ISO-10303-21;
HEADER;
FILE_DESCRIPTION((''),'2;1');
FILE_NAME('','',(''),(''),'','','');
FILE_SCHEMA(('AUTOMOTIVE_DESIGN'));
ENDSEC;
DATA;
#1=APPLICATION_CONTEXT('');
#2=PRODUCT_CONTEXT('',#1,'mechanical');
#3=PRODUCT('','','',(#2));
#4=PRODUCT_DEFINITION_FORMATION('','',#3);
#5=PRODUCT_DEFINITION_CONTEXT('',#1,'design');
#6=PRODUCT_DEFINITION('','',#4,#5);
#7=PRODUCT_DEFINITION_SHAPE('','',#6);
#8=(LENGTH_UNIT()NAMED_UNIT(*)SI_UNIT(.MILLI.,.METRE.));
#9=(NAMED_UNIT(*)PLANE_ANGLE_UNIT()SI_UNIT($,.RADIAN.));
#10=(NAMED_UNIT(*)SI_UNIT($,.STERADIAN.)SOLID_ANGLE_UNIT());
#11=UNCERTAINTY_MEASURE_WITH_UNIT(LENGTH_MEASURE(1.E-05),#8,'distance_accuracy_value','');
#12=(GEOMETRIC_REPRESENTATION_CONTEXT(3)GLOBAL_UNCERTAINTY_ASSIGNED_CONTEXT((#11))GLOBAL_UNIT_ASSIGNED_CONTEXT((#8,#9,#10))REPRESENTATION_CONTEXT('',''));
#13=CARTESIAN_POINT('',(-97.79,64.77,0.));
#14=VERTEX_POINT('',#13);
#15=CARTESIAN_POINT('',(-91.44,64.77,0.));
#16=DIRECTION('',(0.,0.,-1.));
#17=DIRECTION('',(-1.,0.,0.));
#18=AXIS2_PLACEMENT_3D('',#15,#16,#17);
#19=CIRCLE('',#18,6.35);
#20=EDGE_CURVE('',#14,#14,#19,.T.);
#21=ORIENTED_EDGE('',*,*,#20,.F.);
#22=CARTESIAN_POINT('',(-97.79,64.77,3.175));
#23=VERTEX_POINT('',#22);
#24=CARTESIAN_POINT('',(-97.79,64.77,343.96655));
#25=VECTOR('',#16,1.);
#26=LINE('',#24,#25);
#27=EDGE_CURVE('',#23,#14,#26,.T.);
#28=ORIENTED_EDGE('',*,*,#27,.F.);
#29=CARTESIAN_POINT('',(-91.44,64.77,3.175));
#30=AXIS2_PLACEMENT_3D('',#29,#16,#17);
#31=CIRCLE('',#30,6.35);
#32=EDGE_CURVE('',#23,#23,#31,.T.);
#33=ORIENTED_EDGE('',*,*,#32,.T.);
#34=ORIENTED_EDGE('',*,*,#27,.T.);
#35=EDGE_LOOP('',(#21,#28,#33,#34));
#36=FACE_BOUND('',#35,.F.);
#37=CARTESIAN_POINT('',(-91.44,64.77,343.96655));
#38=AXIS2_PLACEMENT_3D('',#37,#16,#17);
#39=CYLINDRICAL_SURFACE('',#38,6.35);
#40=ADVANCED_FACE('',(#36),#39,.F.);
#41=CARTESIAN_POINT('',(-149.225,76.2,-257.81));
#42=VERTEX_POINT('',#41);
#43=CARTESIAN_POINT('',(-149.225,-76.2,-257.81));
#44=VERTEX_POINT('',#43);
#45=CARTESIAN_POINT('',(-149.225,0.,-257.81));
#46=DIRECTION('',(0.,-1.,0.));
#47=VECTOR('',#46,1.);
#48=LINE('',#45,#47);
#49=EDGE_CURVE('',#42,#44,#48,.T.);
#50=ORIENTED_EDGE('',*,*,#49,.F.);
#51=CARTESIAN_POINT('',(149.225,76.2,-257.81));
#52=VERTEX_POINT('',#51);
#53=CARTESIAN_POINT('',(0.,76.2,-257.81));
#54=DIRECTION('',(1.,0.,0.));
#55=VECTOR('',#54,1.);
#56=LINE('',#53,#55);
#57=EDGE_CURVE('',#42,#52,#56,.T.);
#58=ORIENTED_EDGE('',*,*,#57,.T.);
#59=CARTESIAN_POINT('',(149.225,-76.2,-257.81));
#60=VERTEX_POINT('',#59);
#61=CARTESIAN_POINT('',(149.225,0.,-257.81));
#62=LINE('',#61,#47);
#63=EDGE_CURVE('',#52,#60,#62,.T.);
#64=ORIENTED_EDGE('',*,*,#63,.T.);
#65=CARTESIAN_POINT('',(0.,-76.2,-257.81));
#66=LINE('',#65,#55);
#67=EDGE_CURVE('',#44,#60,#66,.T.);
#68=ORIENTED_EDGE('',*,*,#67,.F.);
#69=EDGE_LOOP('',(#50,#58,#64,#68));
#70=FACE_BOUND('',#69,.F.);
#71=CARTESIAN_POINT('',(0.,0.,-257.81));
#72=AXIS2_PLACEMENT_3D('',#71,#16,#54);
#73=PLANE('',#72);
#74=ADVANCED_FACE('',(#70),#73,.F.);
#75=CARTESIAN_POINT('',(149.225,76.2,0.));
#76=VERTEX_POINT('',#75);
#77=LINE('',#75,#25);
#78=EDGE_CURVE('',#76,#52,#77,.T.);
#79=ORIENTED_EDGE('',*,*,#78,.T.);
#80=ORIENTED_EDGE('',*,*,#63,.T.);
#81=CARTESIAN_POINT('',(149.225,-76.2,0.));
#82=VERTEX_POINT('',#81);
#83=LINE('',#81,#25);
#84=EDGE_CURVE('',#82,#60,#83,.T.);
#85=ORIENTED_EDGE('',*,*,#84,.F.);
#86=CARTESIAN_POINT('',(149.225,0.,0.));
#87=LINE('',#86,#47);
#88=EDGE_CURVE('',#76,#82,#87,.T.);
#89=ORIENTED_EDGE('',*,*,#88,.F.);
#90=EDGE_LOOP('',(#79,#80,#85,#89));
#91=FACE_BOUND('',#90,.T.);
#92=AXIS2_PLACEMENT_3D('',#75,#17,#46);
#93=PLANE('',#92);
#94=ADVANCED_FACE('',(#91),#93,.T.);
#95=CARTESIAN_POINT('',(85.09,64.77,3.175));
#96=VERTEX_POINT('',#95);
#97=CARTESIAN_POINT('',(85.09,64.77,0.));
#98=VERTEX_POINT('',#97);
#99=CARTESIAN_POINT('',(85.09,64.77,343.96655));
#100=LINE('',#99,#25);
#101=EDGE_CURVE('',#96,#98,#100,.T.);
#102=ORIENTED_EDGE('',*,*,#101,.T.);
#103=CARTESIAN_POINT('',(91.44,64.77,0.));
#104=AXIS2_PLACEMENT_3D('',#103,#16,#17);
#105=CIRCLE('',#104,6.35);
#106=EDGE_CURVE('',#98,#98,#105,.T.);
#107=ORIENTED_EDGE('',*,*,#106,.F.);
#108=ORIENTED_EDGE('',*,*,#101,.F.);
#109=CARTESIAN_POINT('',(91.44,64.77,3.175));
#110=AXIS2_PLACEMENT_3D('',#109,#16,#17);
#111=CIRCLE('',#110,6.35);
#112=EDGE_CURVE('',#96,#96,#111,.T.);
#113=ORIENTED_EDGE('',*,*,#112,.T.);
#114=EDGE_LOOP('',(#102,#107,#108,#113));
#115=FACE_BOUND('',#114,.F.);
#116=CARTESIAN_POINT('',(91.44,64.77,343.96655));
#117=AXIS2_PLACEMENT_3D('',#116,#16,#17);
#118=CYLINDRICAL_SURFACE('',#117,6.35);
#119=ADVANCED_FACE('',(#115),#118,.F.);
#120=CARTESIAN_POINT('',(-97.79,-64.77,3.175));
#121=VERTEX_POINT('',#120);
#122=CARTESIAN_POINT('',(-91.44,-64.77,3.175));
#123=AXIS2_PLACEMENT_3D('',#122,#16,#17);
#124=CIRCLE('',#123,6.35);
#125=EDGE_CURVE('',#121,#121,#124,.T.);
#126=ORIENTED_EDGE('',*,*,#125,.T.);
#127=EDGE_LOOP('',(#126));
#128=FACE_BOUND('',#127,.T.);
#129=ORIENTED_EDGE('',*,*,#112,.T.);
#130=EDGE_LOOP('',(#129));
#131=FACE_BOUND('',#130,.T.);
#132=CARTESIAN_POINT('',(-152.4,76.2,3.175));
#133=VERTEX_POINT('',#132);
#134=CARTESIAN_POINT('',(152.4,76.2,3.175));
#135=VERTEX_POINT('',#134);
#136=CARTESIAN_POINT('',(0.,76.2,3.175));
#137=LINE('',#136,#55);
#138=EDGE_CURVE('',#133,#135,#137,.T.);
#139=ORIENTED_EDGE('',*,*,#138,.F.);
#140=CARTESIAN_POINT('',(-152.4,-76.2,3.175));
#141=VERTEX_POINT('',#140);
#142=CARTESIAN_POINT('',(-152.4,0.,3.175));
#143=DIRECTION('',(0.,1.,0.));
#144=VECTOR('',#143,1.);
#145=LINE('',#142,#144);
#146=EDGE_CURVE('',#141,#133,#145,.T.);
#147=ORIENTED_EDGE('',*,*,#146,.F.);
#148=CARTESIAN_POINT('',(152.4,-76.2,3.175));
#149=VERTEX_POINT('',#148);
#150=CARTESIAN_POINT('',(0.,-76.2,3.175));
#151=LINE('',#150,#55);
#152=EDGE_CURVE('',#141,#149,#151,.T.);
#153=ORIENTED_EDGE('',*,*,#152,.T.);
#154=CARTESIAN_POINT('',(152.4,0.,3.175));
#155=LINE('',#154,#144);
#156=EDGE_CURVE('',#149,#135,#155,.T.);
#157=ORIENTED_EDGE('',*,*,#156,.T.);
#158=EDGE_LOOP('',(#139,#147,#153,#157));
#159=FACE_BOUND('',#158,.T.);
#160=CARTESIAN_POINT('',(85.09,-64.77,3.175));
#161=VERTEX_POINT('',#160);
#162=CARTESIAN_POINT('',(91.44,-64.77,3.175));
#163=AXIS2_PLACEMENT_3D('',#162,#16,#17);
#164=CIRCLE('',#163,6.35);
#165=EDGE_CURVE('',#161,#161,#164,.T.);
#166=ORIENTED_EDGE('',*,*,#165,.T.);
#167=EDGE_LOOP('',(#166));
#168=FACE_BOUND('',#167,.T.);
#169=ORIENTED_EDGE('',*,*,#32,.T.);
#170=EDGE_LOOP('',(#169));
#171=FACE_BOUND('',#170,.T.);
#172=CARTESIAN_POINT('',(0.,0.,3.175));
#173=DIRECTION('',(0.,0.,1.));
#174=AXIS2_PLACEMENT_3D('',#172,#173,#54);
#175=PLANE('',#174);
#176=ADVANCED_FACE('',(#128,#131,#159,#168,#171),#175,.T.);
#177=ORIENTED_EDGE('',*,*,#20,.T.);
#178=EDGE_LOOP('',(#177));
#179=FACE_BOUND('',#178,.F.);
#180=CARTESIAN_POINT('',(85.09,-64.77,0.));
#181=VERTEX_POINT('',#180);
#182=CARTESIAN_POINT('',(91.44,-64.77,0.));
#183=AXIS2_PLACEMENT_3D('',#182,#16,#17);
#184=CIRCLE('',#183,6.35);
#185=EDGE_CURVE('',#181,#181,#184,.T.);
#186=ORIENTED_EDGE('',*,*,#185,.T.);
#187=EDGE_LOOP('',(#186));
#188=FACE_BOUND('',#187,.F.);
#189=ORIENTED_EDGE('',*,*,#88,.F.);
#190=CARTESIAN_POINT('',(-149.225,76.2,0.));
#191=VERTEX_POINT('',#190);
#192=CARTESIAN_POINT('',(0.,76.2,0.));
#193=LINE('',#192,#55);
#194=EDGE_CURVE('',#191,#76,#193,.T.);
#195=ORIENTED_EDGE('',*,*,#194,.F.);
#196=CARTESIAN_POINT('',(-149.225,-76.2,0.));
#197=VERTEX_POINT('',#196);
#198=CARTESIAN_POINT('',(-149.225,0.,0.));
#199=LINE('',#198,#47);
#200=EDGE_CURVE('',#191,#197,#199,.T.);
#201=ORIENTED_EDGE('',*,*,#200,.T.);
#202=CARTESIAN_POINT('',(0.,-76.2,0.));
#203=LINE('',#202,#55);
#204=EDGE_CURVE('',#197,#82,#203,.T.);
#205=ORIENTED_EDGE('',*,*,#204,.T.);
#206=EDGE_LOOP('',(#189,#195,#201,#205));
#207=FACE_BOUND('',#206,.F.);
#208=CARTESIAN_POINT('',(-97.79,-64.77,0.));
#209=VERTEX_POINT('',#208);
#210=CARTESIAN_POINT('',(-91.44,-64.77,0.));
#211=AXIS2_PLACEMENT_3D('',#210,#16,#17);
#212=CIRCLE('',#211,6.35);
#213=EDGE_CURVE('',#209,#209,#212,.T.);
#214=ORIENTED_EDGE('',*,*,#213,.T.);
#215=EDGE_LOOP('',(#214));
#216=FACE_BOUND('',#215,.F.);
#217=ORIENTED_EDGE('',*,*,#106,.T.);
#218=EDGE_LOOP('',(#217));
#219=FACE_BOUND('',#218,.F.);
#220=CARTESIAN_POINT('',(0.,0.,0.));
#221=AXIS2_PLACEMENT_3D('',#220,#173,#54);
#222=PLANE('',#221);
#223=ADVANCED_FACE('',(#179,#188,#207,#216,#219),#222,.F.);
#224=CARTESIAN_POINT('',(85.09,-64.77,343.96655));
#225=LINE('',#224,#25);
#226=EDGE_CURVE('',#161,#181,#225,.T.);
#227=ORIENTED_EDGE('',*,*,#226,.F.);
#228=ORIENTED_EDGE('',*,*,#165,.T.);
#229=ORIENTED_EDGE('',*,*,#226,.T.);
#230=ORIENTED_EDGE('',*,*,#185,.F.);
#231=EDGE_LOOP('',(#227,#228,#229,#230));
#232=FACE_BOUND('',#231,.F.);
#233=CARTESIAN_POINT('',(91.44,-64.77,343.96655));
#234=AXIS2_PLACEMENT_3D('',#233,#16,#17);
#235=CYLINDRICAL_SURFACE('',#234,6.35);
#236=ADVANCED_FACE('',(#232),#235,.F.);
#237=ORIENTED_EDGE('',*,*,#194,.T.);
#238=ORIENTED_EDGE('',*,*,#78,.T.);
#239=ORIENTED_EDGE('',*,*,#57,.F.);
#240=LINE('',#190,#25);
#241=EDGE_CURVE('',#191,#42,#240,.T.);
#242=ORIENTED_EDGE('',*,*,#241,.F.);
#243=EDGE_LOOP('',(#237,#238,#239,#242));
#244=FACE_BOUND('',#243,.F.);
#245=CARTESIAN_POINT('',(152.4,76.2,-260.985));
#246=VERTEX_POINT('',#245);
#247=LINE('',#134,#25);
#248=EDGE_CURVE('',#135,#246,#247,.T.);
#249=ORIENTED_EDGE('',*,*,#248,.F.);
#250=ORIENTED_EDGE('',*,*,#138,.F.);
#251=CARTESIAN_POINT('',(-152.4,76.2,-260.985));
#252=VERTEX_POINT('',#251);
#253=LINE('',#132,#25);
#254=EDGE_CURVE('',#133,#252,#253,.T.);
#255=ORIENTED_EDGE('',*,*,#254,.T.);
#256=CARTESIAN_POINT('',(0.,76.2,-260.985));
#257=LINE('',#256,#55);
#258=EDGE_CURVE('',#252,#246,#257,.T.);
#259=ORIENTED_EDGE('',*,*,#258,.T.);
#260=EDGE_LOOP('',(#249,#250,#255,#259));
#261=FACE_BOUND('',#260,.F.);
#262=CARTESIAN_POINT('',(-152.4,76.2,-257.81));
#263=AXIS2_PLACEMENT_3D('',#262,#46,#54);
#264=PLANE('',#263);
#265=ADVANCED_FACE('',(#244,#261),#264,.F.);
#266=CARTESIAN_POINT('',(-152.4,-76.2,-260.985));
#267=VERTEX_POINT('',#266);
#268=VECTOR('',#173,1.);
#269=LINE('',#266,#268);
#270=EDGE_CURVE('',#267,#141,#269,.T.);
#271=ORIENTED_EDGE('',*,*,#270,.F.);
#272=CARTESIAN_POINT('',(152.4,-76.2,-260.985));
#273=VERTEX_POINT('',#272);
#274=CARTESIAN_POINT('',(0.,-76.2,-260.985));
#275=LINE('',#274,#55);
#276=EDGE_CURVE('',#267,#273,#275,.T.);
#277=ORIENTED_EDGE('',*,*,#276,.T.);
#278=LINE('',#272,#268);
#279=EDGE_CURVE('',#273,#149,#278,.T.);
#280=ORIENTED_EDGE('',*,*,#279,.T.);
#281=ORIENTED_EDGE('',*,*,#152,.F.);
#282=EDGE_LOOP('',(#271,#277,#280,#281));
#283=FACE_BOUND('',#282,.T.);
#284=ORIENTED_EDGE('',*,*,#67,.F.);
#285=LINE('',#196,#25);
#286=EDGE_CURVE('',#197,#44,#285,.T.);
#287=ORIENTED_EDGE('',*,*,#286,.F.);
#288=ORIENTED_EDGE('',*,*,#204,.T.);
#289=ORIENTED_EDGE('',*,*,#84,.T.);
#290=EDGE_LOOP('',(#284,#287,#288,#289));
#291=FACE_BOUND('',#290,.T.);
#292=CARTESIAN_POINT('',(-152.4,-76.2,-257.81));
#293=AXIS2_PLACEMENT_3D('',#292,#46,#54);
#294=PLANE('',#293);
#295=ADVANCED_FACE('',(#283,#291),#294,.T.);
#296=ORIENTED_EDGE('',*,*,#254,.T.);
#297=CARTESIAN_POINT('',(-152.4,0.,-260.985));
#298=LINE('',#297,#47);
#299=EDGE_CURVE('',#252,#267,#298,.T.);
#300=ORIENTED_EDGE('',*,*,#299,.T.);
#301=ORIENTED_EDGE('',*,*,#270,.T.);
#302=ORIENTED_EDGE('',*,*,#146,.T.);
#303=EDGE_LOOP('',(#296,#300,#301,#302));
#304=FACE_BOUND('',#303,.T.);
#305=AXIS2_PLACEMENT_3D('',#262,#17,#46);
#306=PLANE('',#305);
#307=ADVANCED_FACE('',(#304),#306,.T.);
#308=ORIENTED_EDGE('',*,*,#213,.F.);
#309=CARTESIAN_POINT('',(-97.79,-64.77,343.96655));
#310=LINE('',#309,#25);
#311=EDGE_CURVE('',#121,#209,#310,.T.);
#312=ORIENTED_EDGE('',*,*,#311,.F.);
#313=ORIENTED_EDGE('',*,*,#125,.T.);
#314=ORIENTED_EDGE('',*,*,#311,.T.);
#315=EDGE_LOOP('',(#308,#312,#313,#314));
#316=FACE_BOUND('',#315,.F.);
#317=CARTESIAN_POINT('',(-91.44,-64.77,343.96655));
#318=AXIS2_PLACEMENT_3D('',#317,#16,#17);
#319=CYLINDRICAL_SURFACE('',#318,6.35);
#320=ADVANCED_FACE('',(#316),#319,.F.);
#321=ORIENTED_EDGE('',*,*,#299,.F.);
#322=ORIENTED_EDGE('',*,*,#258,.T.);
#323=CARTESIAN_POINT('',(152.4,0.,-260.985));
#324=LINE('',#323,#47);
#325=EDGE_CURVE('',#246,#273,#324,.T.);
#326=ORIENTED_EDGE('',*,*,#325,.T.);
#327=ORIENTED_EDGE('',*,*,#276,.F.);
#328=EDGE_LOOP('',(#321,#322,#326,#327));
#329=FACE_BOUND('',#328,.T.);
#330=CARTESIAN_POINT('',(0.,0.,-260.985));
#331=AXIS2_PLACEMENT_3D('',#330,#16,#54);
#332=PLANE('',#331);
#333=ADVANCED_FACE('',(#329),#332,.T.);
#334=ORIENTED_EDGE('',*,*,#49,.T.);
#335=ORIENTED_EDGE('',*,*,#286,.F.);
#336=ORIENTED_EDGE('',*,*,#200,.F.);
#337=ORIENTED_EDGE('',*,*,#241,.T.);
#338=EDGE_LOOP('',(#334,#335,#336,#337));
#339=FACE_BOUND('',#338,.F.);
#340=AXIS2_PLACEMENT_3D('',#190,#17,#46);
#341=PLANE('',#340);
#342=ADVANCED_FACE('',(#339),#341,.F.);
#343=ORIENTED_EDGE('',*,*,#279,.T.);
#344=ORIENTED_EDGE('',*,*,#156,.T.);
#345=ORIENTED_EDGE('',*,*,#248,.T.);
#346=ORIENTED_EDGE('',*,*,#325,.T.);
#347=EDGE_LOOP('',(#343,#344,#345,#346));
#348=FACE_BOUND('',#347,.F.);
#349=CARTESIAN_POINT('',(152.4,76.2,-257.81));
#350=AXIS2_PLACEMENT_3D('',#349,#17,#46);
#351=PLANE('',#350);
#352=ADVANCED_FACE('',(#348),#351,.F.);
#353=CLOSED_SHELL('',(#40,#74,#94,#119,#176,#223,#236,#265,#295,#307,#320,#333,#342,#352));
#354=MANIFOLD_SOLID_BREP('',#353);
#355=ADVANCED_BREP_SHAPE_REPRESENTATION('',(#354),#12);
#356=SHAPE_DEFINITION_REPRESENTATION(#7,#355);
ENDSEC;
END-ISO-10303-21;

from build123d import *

# Parameters (mm, degrees)
F0_W     = 304.8
F0_H     = 152.4
F1_DEPTH = 3.175
F4_D     = 12.7
F5_W     = 3.175
F5_H     = 152.4
F6_DEPTH = 257.81
F7_W     = 304.8
F7_H     = 152.4
F8_DEPTH = 3.175


# Not quite as in the source:
# - a length typed as a fraction of an inch, garbled in the dataset ("3 / 203.2 mm" for 3/8 in), is restored


with BuildPart() as f1:
    # F0 (on Top) → F1 (new body)
    with BuildSketch(Plane.XY):
        Rectangle(F0_W, F0_H)
    extrude(amount=F1_DEPTH)

    # F4 (through all)
    with Locations(Plane.XY.offset(3.175)):
        with Locations((-91.44, 64.77), (-91.44, -64.77), (91.44, -64.77), (91.44, 64.77)):
            Hole(F4_D / 2)

    # F5 (on face) → F6 (join)
    with BuildSketch(Plane(origin=(0, 0, 0), x_dir=(1, 0, 0), z_dir=(0, 0, -1))):
        with Locations((-150.8125, 0)):
            Rectangle(F5_W, F5_H)
        with Locations((150.8125, 0)):
            Rectangle(F5_W, F5_H)
    extrude(amount=F6_DEPTH)

    # F7 (on face) → F8 (join)
    with BuildSketch(Plane(origin=(0, 0, -257.81), x_dir=(1, 0, 0), z_dir=(0, 0, -1))):
        Rectangle(F7_W, F7_H)
    extrude(amount=F8_DEPTH)


solid = f1.part
